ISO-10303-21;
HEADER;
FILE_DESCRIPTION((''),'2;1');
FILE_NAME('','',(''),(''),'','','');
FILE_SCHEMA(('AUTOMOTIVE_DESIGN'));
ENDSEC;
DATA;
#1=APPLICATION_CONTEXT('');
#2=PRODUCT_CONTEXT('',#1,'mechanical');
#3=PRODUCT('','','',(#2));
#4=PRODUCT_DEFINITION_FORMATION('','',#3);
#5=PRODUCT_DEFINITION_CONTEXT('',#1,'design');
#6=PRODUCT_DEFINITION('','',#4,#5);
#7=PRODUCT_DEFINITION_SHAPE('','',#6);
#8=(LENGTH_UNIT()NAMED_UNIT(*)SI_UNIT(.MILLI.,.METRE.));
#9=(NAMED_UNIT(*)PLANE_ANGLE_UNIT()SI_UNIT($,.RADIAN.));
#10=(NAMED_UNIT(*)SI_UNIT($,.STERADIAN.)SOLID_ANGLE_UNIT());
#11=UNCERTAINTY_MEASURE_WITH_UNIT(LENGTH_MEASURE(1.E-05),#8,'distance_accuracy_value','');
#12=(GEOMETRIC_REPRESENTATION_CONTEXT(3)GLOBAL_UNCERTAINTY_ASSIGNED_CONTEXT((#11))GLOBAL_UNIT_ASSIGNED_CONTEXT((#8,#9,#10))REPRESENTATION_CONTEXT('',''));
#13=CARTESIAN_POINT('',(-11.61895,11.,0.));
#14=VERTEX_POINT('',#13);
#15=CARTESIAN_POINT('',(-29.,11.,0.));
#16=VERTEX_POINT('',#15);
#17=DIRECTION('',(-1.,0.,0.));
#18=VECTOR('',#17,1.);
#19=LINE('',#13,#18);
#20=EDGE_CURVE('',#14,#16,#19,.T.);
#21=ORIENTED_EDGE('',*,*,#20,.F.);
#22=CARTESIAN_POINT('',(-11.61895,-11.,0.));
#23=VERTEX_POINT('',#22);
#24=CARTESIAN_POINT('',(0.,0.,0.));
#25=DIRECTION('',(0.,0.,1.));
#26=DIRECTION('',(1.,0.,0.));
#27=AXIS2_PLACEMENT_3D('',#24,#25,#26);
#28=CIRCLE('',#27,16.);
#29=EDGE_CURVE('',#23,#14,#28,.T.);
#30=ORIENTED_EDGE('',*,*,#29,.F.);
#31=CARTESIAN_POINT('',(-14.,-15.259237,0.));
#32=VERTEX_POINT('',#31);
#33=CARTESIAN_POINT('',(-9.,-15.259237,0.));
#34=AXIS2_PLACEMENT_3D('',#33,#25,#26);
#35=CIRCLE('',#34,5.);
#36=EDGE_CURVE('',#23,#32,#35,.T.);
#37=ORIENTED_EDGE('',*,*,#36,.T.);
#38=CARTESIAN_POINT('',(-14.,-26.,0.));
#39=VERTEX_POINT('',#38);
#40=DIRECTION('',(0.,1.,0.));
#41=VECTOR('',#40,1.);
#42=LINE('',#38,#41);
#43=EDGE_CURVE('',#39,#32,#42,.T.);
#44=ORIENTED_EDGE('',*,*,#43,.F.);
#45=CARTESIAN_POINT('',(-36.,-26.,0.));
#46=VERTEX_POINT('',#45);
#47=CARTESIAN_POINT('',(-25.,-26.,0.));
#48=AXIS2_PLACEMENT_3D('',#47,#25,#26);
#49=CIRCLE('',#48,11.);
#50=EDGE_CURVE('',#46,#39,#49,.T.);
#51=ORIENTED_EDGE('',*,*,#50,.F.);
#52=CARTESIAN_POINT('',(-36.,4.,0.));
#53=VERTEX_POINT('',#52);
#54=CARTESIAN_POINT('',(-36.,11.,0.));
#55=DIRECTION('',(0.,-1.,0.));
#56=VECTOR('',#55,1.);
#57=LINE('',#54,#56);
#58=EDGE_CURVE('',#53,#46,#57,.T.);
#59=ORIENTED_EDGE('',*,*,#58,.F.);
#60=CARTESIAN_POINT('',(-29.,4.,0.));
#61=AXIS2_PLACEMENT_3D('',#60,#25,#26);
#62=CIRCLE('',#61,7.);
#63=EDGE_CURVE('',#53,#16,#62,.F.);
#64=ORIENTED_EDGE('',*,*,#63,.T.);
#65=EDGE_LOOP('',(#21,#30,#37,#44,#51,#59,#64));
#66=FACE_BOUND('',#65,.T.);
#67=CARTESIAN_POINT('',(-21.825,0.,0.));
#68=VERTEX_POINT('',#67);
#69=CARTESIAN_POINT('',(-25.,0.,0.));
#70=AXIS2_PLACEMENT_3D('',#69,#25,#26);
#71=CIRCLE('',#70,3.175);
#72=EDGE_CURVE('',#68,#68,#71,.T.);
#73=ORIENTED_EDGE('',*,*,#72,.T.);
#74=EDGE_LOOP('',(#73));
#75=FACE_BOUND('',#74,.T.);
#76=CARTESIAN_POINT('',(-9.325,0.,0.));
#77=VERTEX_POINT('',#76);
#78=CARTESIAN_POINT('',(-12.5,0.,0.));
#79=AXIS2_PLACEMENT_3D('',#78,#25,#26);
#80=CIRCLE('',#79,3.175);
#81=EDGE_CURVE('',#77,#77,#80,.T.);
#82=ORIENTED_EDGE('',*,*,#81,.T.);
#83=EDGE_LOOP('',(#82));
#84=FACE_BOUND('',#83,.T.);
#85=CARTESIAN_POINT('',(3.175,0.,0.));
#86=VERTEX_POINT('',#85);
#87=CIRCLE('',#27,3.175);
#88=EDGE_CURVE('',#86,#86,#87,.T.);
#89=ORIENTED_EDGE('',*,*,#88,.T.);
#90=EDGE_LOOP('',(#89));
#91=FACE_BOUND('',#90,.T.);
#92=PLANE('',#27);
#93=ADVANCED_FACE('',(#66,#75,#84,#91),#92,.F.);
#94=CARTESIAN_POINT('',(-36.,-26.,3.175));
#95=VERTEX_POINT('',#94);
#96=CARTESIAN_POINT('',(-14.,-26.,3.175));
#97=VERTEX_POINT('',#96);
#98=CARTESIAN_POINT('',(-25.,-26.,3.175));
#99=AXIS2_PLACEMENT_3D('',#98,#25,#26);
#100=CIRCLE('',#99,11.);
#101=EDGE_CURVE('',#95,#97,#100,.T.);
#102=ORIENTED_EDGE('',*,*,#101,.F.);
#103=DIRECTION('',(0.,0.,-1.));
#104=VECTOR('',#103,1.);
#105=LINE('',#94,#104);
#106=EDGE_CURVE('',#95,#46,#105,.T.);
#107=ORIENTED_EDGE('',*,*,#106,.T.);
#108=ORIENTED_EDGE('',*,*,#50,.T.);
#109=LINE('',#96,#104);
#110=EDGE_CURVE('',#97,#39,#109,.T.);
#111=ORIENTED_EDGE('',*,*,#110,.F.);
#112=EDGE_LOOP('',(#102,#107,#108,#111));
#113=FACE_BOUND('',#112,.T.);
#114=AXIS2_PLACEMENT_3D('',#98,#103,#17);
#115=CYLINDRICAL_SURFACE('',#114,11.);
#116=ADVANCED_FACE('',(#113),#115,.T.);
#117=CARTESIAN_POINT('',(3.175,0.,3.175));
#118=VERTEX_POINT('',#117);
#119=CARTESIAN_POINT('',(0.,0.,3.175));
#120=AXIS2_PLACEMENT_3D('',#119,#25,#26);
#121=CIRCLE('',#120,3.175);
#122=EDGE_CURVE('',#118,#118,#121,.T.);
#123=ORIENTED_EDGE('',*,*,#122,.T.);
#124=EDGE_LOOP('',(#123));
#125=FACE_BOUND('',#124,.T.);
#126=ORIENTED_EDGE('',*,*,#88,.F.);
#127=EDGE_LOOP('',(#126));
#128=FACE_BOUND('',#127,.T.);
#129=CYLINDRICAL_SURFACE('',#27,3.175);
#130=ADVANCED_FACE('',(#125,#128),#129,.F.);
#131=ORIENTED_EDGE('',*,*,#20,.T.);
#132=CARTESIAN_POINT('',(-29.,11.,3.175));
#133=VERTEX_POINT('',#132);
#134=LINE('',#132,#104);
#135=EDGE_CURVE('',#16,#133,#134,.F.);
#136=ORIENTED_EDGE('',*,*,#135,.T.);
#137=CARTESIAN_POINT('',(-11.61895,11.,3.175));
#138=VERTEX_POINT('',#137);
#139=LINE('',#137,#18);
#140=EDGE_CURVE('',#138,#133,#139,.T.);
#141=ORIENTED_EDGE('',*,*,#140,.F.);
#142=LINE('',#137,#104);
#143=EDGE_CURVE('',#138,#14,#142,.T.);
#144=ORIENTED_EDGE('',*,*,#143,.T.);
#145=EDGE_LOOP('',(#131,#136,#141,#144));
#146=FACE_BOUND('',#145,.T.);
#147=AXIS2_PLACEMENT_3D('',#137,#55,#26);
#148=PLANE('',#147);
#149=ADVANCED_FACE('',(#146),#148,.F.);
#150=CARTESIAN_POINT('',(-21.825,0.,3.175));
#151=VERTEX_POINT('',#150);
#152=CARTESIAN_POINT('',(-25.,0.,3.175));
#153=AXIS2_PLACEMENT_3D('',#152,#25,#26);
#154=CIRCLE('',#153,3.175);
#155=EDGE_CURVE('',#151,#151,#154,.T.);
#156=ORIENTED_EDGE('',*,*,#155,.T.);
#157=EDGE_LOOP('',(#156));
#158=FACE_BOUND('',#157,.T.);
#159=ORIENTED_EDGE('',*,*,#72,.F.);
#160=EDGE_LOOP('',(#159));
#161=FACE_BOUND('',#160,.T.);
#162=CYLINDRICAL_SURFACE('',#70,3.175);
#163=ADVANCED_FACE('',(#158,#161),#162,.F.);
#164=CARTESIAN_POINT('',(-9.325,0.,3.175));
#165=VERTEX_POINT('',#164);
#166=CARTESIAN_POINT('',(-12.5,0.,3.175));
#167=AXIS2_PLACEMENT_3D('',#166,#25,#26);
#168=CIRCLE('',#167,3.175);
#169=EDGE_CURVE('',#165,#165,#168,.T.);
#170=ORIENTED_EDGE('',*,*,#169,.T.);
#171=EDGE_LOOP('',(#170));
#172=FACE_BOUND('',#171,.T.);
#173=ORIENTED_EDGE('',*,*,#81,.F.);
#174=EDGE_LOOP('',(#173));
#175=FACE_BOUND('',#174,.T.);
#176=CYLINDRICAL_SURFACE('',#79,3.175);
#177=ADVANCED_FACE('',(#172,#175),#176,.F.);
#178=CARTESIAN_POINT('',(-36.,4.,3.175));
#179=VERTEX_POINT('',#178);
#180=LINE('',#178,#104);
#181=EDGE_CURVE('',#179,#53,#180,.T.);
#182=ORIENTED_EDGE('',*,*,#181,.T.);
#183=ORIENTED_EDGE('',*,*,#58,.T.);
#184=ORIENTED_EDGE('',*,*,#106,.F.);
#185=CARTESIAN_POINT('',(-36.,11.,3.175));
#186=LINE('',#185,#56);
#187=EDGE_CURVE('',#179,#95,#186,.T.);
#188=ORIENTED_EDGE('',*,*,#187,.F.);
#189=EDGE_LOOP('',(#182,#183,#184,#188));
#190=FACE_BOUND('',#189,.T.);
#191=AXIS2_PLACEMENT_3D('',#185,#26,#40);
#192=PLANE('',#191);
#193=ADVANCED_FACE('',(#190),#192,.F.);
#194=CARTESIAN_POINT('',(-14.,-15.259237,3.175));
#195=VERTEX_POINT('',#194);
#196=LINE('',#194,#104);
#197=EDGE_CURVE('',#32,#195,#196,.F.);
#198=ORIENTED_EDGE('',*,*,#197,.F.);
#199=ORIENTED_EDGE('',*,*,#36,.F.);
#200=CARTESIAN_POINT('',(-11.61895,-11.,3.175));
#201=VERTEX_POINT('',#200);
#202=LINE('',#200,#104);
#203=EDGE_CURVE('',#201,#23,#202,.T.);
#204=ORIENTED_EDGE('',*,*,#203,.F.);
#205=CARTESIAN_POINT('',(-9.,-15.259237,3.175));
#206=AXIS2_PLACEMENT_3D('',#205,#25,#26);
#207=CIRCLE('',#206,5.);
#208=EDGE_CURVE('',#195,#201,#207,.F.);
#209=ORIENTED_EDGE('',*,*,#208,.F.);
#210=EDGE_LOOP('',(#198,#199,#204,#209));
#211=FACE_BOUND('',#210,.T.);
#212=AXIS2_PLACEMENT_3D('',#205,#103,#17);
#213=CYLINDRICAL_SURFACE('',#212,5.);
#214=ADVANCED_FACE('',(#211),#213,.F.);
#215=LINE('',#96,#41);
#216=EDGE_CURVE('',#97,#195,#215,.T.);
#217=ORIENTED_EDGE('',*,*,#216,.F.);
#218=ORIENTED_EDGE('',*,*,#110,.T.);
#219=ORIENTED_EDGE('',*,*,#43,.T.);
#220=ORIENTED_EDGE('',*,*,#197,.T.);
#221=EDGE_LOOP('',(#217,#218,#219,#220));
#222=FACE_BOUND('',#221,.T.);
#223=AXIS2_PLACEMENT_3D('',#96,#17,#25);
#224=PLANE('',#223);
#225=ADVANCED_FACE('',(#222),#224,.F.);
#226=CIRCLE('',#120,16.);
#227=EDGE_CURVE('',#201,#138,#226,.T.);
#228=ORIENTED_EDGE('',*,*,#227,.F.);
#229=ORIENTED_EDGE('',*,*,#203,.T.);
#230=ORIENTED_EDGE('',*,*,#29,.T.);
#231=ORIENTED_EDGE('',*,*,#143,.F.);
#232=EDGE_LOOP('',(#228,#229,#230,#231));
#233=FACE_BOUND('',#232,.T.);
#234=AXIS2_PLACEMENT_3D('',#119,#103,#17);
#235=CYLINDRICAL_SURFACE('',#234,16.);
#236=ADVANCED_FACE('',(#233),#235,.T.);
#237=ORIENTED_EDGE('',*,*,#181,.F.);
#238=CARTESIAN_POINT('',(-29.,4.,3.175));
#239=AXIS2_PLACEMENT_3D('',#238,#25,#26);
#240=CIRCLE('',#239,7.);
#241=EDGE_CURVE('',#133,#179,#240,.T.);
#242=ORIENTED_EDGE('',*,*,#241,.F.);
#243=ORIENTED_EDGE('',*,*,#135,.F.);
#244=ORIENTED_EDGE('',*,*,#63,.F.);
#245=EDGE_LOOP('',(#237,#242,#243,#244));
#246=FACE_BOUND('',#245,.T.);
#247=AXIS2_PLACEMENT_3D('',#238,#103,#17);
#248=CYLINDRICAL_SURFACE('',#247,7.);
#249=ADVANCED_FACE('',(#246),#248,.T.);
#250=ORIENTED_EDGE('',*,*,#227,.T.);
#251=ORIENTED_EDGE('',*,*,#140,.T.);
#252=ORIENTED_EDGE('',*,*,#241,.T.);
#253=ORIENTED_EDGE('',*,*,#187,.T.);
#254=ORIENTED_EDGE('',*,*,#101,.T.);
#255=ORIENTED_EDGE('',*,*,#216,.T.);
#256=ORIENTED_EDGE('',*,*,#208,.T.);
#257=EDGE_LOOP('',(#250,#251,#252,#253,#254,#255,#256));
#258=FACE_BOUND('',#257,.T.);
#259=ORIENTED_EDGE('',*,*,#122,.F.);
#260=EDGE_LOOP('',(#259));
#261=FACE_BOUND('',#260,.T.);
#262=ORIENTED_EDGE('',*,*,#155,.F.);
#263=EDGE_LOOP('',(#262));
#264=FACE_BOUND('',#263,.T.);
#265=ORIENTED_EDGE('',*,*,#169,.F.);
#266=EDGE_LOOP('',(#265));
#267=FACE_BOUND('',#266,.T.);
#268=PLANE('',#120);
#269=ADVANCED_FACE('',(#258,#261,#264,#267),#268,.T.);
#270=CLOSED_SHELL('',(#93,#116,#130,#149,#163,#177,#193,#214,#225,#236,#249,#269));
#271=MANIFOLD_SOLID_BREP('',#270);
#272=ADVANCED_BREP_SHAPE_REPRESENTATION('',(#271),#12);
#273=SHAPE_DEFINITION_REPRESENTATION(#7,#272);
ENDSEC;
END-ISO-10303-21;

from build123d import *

# Parameters (mm, degrees)
BOSS_EXTRUDE1_DEPTH = 3.175
FILLET1_R           = 7
FILLET2_R           = 5
SKETCH2_R           = 3.175
CUT_EXTRUDE1_DEPTH  = 52.721181589
LPATTERN1_COUNT     = 3
LPATTERN1_PITCH     = 12.5


with BuildPart() as part:
    # Sketch1 → Boss-Extrude1 (new body)
    with BuildSketch(Plane.XY):
        with BuildLine():
            Line((-11.618950039, 11), (-36, 11))
            Line((-36, 11), (-36, -26))
            ThreePointArc((-36, -26), (-25, -37), (-14, -26))
            Line((-14, -26), (-14, -11))
            Line((-14, -11), (-11.618950039, -11))
            ThreePointArc((-11.618950039, -11), (16, 0), (-11.618950039, 11))
        make_face()
    extrude(amount=BOSS_EXTRUDE1_DEPTH)

    # Fillet1
    fillet1_edges = [part.edges().sort_by_distance(p)[0] for p in [
        (-36, 11, 1.5875),
    ]]
    fillet(fillet1_edges, radius=FILLET1_R)

    # Fillet2
    # the kernel refuses this fillet: 5 mm, written as the material it adds along each edge
    with BuildSketch(Plane(origin=(-14, -11, 0), x_dir=(1, 0, 0), z_dir=(0, 0, 1))) as fillet2_piece_1:
        with BuildLine():
            CenterArc((5, -4.259237102), FILLET2_R, 121.586822832, 58.413177168)
            Line((0, -4.259237102), (-0.1, -4.259237102))
            Line((-0.1, -4.259237102), (-0.1, 0))
            Line((-0.1, 0), (0, 0.1))
            ThreePointArc((0, 0.1), (1.190524981, 0.1), (2.328670961, 0.085184742))
            Line((2.328670961, 0.085184742), (2.381049961, 0))
        make_face()
    extrude(amount=3.175)

    # Sketch2 → Cut-Extrude1 (cut, through all)
    with BuildSketch(Plane.XY.offset(3.175)):
        Circle(SKETCH2_R)
    cut_extrude1 = extrude(amount=-CUT_EXTRUDE1_DEPTH, mode=Mode.SUBTRACT)

    # LPattern1: Cut-Extrude1 ×3
    with Locations(*[(-i * LPATTERN1_PITCH, 0, 0) for i in range(1, LPATTERN1_COUNT)]):
        add(cut_extrude1, mode=Mode.SUBTRACT)


solid = part.part
